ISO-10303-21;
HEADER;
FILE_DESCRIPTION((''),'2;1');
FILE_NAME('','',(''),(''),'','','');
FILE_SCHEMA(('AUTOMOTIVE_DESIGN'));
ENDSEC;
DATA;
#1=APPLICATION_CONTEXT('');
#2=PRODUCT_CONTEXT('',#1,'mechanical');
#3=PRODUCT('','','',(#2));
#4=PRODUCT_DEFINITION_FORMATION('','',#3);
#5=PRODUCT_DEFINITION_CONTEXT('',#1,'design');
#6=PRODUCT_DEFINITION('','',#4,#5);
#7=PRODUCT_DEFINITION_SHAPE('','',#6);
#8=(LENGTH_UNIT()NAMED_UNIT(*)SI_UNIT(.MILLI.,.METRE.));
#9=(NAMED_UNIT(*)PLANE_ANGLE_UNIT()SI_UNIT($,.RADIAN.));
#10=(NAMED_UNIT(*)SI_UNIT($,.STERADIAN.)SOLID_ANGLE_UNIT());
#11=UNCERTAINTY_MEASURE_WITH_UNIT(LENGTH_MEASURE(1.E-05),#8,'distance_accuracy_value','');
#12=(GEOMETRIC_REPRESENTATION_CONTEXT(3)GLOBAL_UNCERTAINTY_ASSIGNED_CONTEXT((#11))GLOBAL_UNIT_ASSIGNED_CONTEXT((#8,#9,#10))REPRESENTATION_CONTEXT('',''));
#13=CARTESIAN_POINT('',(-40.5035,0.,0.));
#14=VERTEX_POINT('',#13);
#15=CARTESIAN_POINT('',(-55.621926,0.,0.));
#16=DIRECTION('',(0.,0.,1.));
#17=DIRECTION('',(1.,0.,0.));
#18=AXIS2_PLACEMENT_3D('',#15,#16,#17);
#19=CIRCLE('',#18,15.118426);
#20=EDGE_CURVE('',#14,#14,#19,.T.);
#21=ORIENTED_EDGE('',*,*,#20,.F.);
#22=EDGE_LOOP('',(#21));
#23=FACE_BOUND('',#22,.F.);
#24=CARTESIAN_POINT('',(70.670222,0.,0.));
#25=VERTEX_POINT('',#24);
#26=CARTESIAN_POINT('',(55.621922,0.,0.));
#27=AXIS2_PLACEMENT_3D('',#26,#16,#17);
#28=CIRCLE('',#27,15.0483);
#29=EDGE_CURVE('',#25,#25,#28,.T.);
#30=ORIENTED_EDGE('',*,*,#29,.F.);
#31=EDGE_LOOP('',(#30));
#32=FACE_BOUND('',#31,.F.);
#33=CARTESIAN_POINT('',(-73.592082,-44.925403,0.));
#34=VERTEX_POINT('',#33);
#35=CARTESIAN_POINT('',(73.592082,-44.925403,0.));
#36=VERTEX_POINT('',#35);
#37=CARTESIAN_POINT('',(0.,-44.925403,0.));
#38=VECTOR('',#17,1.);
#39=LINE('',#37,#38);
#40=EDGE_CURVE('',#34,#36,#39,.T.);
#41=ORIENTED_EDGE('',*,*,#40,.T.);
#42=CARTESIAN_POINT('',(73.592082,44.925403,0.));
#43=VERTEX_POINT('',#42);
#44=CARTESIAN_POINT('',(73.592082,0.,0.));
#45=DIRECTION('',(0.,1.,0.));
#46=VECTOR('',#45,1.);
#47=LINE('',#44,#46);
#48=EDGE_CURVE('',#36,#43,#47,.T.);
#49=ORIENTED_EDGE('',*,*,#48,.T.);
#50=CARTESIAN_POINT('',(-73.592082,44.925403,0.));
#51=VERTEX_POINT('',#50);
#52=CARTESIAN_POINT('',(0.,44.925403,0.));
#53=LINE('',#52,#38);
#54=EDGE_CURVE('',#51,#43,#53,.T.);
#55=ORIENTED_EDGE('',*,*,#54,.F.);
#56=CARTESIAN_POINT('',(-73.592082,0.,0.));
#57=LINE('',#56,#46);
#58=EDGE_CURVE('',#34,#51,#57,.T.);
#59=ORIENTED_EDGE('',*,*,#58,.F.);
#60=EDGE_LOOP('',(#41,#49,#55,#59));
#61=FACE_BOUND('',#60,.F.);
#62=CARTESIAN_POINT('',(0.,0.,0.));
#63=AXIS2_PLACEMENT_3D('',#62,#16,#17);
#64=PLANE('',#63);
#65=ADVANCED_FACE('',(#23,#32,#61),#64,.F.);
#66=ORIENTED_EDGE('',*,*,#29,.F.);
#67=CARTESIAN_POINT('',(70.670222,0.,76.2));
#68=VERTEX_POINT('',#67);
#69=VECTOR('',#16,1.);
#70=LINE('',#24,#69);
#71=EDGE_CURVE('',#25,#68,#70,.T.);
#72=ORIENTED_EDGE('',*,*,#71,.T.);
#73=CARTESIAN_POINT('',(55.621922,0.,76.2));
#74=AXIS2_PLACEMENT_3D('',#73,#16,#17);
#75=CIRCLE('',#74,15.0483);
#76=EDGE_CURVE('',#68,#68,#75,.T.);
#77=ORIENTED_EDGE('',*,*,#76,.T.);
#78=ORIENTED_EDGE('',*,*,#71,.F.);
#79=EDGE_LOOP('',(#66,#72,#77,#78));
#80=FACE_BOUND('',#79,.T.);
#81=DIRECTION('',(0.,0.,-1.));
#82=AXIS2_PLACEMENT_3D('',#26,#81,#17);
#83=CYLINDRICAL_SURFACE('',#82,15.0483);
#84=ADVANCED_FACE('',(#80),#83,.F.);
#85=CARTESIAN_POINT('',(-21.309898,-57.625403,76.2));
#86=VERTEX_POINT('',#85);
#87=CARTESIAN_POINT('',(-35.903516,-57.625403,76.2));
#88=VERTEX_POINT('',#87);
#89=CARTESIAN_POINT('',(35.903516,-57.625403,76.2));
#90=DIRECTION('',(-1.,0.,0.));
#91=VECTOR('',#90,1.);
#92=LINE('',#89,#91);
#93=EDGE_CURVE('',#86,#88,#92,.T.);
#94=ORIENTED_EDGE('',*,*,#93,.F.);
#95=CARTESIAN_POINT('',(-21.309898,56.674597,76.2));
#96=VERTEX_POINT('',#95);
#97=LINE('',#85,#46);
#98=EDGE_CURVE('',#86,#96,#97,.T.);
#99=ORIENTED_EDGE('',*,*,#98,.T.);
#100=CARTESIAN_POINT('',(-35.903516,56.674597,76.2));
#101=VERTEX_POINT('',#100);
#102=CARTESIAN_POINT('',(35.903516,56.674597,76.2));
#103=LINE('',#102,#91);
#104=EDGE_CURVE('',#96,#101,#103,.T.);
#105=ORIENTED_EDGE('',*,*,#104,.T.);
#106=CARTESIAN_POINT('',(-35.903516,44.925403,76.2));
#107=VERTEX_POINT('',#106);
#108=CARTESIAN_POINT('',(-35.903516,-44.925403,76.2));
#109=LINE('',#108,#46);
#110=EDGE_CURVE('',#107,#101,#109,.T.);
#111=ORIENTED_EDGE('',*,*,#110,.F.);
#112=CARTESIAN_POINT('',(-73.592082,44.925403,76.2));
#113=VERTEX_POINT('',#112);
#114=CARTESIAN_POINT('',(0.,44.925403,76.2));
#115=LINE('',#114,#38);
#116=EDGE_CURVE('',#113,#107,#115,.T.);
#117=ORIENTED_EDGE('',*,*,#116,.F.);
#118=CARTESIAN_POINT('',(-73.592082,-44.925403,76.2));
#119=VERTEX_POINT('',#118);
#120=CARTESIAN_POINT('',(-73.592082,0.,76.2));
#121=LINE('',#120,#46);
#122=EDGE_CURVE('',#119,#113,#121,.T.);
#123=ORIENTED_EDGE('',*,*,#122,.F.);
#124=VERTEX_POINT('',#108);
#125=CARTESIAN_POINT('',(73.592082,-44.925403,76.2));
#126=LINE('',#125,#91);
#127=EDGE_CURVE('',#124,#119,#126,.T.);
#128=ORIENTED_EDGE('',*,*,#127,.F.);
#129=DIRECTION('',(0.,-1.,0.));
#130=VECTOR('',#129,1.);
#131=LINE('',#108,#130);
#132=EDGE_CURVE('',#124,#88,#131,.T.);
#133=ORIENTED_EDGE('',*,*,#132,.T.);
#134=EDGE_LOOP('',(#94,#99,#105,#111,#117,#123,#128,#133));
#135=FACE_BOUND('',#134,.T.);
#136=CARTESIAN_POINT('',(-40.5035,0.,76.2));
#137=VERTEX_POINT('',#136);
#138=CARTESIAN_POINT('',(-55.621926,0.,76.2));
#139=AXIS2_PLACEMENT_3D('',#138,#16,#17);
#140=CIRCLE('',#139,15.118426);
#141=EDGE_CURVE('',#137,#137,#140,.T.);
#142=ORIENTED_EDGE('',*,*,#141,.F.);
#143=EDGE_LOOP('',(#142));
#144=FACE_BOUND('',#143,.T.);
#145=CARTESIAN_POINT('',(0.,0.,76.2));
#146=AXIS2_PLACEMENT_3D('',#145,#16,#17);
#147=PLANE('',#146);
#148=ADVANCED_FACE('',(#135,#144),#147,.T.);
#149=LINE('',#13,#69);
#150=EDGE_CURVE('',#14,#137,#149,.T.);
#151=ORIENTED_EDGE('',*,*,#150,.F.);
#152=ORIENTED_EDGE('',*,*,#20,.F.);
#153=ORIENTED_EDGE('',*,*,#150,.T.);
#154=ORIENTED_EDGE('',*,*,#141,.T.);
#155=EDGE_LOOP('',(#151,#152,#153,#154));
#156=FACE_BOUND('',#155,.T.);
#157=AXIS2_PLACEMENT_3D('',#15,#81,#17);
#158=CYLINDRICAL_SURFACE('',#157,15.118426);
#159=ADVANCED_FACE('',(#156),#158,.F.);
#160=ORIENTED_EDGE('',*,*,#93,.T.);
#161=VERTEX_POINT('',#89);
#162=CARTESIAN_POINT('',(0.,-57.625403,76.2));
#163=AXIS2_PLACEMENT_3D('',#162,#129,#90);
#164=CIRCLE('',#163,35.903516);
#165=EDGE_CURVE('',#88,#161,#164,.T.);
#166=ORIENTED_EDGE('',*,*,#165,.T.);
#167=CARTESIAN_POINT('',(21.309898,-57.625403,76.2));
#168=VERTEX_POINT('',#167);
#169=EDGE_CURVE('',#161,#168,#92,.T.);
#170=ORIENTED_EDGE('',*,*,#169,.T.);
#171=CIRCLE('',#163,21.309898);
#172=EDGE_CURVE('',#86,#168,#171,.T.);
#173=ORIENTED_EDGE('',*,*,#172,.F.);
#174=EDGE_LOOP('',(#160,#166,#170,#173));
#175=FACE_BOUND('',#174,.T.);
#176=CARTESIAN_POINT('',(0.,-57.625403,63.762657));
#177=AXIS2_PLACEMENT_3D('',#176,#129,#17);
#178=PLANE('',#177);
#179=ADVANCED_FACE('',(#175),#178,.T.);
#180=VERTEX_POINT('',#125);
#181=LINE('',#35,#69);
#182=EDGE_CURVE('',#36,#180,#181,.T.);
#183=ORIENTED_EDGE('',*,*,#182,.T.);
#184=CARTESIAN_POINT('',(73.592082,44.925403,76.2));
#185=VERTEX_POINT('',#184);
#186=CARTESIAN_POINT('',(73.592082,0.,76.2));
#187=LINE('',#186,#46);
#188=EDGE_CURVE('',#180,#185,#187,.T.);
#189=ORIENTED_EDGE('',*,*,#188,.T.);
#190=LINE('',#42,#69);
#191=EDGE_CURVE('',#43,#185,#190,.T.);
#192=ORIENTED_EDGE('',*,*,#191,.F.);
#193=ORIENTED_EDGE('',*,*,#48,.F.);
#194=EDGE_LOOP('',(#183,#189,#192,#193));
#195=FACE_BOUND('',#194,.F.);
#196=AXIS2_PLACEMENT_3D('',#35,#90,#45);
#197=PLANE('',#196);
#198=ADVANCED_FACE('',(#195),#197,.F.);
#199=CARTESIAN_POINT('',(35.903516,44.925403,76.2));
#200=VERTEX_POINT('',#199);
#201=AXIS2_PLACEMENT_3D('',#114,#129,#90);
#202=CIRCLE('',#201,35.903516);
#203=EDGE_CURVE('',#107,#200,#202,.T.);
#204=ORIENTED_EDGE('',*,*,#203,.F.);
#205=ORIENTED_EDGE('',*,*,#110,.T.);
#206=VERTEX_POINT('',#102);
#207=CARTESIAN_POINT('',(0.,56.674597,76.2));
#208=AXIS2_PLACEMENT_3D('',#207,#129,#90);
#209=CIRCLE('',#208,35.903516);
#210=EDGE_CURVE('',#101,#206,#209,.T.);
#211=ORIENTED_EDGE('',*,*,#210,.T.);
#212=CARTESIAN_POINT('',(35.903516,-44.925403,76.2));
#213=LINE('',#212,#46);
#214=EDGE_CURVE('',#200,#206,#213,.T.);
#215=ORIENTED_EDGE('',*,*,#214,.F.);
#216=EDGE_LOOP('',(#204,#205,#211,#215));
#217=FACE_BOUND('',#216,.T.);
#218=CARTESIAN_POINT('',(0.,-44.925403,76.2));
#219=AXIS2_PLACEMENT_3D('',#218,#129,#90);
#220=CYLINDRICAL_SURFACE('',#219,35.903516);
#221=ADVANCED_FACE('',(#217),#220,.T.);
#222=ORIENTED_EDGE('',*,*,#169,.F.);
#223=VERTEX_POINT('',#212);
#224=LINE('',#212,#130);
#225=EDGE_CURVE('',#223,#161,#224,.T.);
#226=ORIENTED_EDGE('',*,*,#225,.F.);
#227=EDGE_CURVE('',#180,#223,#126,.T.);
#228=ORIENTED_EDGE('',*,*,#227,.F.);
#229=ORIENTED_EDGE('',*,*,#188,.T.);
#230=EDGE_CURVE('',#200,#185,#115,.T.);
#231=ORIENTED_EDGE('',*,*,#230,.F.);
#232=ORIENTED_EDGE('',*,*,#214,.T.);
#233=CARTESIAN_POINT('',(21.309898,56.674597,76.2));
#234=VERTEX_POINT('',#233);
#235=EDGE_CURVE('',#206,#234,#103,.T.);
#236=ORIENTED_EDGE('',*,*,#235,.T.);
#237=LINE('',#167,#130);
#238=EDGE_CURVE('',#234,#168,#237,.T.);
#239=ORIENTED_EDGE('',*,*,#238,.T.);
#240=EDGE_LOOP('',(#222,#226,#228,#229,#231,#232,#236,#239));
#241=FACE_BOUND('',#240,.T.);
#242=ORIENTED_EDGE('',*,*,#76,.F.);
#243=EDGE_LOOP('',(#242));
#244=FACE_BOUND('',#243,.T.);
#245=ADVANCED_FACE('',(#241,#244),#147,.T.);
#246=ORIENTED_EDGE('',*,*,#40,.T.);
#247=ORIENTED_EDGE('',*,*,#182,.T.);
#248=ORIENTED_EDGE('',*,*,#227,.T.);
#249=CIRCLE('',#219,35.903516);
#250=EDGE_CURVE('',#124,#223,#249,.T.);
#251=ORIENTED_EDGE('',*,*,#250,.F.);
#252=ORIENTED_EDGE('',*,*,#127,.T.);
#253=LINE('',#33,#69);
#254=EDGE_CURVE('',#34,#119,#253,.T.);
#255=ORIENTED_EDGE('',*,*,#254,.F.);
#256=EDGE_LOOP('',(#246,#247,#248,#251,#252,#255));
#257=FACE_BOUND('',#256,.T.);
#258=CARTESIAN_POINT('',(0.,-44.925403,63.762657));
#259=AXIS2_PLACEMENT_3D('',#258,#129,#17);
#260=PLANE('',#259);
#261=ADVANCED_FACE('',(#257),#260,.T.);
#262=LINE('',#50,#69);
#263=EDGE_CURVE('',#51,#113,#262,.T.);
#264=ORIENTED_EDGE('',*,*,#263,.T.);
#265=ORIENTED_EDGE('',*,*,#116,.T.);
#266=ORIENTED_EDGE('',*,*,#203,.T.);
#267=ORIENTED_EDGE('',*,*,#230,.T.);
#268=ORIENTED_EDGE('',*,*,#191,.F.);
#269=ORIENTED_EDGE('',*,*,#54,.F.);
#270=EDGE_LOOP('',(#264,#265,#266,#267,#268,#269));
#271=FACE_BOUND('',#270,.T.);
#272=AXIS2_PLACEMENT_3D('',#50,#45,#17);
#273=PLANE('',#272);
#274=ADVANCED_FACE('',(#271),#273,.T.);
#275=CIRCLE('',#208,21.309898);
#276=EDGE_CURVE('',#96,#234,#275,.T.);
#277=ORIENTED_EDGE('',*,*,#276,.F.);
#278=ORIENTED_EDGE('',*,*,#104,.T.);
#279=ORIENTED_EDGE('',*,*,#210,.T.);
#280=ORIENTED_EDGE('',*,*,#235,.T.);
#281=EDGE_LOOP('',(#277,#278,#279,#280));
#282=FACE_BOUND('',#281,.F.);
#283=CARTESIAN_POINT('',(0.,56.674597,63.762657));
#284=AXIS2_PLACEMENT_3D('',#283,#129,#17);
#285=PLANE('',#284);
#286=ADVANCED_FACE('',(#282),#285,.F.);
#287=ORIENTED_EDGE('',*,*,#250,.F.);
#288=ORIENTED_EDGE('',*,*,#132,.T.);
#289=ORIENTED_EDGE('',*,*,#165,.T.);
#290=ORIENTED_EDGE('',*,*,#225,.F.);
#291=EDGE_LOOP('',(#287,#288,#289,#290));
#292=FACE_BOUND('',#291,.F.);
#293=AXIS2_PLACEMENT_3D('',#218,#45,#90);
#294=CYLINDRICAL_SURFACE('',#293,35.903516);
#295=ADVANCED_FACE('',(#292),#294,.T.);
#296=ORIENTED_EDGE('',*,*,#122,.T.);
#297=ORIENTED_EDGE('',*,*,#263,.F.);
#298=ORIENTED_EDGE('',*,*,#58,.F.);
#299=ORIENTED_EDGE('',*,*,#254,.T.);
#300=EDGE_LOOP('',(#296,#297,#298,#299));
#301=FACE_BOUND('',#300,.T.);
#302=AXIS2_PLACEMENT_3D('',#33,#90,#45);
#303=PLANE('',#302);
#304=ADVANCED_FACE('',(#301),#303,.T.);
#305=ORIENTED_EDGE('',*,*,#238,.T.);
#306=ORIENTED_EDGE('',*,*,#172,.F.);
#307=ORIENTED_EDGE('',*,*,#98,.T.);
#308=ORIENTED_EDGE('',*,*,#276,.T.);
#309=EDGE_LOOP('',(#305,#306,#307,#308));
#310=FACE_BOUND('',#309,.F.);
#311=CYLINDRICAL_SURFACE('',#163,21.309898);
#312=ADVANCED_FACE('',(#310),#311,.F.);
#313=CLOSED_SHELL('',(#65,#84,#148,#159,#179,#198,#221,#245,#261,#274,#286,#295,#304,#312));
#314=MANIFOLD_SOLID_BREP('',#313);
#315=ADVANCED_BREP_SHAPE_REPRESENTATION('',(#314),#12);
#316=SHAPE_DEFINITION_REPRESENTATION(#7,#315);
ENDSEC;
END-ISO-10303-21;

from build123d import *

# Parameters (mm, degrees)
F0_W     = 147.184163332
F0_H     = 89.8508056998
F0_R     = 15.1184260195
F0_R_2   = 15.0482996588
F1_DEPTH = 76.2
F3_DEPTH = 101.6
F4_DEPTH = 12.7
F6_DEPTH = 114.301


with BuildPart() as f1:
    # F0 (on Top) → F1 (new body)
    with BuildSketch(Plane.XY):
        Rectangle(F0_W, F0_H)
        with Locations((-55.6219257414, 0)):
            Circle(F0_R, mode=Mode.SUBTRACT)
        with Locations((55.6219220161, 0)):
            Circle(F0_R_2, mode=Mode.SUBTRACT)
    extrude(amount=F1_DEPTH)

    # F2 (on face) → F3 (join)
    with BuildSketch(Plane.XZ.offset(44.9254028499)):
        with BuildLine():
            ThreePointArc((-35.903516253, 76.2), (0, 40.296483747), (35.903516253, 76.2))
            Line((35.903516253, 76.2), (-35.903516253, 76.2))
        make_face()
    extrude(amount=-F3_DEPTH)

    # F2 (on face) → F4 (join)
    with BuildSketch(Plane.XZ.offset(44.9254028499)):
        with BuildLine():
            ThreePointArc((-35.903516253, 76.2), (0, 40.296483747), (35.903516253, 76.2))
            Line((35.903516253, 76.2), (-35.903516253, 76.2))
        make_face()
    extrude(amount=F4_DEPTH)

    # F5 (on face) → F6 (cut, through all)
    with BuildSketch(Plane.XZ.offset(57.6254028499)):
        with BuildLine():
            Line((-21.3098982127, 76.2), (21.3098982127, 76.2))
            ThreePointArc((21.3098982127, 76.2), (0, 97.5098982127), (-21.3098982127, 76.2))
        make_face()
        with BuildLine():
            ThreePointArc((-21.3098982127, 76.2), (0, 54.8901017873), (21.3098982127, 76.2))
            Line((21.3098982127, 76.2), (-21.3098982127, 76.2))
        make_face()
    extrude(amount=-F6_DEPTH, mode=Mode.SUBTRACT)


solid = f1.part
